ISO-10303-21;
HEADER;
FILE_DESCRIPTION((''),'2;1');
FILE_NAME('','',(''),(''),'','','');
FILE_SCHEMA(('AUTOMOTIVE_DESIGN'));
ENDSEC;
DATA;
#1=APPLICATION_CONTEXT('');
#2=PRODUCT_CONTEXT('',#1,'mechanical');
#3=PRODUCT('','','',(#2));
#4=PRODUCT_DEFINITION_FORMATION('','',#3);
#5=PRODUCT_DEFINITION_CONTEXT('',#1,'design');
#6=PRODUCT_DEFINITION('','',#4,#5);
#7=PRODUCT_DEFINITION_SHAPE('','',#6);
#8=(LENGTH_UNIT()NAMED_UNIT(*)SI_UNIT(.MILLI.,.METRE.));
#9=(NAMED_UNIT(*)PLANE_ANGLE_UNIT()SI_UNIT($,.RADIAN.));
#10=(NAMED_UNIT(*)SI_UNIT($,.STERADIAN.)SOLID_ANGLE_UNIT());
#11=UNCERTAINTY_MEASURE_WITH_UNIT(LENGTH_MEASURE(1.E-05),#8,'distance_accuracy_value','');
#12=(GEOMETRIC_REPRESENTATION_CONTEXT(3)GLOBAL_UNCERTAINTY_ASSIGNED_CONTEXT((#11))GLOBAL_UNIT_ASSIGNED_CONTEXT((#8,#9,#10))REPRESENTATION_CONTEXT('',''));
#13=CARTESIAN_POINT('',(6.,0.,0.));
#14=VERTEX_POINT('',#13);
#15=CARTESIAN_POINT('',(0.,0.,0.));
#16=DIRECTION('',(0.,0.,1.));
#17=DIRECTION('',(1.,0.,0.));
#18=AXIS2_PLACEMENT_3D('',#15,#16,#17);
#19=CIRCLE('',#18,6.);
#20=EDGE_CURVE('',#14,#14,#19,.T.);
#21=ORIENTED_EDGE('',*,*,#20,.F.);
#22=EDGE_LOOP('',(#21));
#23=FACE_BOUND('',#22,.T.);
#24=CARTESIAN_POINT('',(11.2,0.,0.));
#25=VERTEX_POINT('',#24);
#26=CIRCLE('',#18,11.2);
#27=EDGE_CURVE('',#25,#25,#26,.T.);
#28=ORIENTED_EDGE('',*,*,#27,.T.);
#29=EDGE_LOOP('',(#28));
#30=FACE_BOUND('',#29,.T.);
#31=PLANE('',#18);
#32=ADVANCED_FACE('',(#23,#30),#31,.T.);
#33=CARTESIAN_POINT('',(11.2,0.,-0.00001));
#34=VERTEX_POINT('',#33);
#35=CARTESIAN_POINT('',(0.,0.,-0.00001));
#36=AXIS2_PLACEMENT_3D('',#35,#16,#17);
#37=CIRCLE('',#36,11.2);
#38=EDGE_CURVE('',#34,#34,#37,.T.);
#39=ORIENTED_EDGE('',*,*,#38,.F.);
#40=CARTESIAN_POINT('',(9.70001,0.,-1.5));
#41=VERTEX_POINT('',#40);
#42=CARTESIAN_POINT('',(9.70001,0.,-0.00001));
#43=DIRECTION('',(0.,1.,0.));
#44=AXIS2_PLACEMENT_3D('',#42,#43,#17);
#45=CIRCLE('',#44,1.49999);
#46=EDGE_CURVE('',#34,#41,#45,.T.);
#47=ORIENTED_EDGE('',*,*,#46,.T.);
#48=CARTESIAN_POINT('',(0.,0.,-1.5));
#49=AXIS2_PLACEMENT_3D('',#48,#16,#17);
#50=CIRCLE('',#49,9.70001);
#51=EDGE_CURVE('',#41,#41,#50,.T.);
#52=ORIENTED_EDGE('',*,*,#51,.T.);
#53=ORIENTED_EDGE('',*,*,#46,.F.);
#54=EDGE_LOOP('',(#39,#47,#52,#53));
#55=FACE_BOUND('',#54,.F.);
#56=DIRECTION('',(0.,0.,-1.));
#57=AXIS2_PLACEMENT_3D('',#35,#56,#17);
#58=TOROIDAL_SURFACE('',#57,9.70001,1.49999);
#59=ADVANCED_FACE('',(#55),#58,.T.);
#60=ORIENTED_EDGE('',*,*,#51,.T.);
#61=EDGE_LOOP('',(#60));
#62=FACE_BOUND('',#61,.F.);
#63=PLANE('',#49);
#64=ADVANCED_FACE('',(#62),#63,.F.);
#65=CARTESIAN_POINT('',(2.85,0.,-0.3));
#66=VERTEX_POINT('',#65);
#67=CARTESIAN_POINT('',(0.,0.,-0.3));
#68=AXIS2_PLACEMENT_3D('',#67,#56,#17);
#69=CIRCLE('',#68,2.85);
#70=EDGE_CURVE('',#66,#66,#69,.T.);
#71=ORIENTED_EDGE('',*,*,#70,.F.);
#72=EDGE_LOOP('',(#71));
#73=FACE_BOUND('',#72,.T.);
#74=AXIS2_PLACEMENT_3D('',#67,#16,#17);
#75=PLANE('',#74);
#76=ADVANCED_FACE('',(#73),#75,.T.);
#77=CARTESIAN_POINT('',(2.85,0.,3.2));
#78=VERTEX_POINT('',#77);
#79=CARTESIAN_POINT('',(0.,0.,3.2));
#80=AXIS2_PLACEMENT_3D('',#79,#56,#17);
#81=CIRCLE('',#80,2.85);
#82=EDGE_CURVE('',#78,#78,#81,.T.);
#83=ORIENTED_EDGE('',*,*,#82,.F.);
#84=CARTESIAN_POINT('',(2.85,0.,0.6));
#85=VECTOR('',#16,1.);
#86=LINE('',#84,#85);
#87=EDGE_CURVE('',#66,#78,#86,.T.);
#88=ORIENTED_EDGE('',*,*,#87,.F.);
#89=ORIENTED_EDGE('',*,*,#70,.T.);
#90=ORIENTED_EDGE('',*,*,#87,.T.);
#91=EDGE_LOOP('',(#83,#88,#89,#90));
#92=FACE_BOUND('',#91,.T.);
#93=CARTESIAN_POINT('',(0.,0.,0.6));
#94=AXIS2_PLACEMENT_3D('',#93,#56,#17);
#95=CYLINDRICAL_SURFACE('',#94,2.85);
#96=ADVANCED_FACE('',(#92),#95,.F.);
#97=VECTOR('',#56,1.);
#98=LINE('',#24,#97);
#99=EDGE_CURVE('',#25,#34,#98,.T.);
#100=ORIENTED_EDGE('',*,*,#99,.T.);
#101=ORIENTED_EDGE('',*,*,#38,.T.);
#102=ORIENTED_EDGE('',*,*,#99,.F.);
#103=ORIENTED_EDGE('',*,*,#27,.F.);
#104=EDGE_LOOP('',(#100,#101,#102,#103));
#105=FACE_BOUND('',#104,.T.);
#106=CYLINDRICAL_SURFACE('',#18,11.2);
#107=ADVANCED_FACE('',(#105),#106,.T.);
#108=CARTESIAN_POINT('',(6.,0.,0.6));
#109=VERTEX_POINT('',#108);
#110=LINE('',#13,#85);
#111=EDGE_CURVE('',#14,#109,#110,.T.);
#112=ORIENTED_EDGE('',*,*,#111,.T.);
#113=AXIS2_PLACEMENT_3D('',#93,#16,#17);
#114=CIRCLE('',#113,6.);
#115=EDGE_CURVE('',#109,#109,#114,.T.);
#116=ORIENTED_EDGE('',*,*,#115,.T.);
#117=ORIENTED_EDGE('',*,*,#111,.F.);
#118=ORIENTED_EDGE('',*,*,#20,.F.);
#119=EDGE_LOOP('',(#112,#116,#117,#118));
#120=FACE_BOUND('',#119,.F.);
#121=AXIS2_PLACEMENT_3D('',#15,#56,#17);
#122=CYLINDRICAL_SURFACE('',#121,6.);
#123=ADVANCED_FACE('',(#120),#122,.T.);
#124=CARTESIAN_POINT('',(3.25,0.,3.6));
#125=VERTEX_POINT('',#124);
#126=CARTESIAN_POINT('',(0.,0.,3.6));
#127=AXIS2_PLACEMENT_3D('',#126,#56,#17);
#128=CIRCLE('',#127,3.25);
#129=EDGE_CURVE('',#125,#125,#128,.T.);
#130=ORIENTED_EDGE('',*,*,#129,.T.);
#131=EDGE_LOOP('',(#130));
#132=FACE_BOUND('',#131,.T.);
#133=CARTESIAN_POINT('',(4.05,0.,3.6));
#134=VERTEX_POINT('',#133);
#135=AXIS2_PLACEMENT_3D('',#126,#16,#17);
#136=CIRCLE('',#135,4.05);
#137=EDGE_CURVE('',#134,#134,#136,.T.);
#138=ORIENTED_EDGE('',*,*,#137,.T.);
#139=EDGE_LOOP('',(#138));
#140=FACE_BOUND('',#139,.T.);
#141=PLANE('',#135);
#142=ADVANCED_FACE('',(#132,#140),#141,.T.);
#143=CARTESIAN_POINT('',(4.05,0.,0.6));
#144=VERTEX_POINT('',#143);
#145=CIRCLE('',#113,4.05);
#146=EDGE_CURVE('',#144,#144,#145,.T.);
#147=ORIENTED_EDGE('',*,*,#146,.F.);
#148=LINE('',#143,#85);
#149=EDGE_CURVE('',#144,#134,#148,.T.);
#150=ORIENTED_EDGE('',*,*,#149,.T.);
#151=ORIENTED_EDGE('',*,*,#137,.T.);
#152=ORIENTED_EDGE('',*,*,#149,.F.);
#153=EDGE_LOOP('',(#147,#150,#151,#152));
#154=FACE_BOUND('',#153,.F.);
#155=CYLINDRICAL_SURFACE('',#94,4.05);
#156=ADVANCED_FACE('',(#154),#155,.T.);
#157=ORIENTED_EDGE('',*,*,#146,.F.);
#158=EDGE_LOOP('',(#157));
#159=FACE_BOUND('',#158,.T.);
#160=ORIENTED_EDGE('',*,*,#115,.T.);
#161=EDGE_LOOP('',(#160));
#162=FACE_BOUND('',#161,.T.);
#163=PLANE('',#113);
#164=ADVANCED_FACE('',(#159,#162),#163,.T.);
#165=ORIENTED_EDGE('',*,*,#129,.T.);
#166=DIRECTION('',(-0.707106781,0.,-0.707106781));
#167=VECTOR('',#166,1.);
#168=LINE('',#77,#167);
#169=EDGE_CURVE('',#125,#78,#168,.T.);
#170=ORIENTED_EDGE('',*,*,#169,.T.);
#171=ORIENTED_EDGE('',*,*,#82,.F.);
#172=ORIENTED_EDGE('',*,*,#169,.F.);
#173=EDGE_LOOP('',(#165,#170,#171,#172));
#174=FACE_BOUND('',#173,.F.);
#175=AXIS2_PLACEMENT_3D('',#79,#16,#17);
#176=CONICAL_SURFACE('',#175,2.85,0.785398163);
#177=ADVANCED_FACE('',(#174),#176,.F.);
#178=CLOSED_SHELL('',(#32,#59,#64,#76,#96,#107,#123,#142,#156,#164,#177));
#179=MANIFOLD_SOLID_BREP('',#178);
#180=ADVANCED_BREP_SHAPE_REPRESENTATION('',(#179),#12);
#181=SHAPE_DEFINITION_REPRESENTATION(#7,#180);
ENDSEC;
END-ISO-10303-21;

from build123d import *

# Parameters (mm, degrees)
F0_R     = 11.2
F1_DEPTH = 1.5
F2_R     = 6
F3_DEPTH = 0.6
F4_R     = 4.05
F5_DEPTH = 3
F6_T     = -1.2
F7_R     = 1.49999
F8_SIZE  = 0.4


# Not quite as in the source:
# - a fillet or chamfer is up to 0.001 mm smaller than in the source, because OpenCascade refuses the exact size


with BuildPart() as f1:
    # F0 (on Top) → F1 (new body)
    with BuildSketch(Plane.XY):
        Circle(F0_R)
    extrude(amount=-F1_DEPTH)

    # F2 (on face) → F3 (join)
    with BuildSketch(Plane.XY):
        Circle(F2_R)
    extrude(amount=F3_DEPTH)

    # F4 (on face) → F5 (join)
    with BuildSketch(Plane.XY.offset(0.6)):
        Circle(F4_R)
    extrude(amount=F5_DEPTH)

    # F6
    f6_openings = [f1.faces().sort_by_distance(p)[0] for p in [
        (0, 0, 3.6),
    ]]
    offset(amount=F6_T, openings=f6_openings, kind=Kind.INTERSECTION)

    # F7 (radius 1.5 in the source; OpenCascade refuses exactly that, so slightly less here)
    f7_edges = [f1.edges().sort_by_distance(p)[0] for p in [
        (-11.2, 0, -1.5),
    ]]
    fillet(f7_edges, radius=F7_R)

    # F8
    f8_edges = [f1.edges().sort_by_distance(p)[0] for p in [
        (-2.85, 0, 3.6),
        (2.85, 0, 1.65),
    ]]
    chamfer(f8_edges, length=F8_SIZE)


solid = f1.part
